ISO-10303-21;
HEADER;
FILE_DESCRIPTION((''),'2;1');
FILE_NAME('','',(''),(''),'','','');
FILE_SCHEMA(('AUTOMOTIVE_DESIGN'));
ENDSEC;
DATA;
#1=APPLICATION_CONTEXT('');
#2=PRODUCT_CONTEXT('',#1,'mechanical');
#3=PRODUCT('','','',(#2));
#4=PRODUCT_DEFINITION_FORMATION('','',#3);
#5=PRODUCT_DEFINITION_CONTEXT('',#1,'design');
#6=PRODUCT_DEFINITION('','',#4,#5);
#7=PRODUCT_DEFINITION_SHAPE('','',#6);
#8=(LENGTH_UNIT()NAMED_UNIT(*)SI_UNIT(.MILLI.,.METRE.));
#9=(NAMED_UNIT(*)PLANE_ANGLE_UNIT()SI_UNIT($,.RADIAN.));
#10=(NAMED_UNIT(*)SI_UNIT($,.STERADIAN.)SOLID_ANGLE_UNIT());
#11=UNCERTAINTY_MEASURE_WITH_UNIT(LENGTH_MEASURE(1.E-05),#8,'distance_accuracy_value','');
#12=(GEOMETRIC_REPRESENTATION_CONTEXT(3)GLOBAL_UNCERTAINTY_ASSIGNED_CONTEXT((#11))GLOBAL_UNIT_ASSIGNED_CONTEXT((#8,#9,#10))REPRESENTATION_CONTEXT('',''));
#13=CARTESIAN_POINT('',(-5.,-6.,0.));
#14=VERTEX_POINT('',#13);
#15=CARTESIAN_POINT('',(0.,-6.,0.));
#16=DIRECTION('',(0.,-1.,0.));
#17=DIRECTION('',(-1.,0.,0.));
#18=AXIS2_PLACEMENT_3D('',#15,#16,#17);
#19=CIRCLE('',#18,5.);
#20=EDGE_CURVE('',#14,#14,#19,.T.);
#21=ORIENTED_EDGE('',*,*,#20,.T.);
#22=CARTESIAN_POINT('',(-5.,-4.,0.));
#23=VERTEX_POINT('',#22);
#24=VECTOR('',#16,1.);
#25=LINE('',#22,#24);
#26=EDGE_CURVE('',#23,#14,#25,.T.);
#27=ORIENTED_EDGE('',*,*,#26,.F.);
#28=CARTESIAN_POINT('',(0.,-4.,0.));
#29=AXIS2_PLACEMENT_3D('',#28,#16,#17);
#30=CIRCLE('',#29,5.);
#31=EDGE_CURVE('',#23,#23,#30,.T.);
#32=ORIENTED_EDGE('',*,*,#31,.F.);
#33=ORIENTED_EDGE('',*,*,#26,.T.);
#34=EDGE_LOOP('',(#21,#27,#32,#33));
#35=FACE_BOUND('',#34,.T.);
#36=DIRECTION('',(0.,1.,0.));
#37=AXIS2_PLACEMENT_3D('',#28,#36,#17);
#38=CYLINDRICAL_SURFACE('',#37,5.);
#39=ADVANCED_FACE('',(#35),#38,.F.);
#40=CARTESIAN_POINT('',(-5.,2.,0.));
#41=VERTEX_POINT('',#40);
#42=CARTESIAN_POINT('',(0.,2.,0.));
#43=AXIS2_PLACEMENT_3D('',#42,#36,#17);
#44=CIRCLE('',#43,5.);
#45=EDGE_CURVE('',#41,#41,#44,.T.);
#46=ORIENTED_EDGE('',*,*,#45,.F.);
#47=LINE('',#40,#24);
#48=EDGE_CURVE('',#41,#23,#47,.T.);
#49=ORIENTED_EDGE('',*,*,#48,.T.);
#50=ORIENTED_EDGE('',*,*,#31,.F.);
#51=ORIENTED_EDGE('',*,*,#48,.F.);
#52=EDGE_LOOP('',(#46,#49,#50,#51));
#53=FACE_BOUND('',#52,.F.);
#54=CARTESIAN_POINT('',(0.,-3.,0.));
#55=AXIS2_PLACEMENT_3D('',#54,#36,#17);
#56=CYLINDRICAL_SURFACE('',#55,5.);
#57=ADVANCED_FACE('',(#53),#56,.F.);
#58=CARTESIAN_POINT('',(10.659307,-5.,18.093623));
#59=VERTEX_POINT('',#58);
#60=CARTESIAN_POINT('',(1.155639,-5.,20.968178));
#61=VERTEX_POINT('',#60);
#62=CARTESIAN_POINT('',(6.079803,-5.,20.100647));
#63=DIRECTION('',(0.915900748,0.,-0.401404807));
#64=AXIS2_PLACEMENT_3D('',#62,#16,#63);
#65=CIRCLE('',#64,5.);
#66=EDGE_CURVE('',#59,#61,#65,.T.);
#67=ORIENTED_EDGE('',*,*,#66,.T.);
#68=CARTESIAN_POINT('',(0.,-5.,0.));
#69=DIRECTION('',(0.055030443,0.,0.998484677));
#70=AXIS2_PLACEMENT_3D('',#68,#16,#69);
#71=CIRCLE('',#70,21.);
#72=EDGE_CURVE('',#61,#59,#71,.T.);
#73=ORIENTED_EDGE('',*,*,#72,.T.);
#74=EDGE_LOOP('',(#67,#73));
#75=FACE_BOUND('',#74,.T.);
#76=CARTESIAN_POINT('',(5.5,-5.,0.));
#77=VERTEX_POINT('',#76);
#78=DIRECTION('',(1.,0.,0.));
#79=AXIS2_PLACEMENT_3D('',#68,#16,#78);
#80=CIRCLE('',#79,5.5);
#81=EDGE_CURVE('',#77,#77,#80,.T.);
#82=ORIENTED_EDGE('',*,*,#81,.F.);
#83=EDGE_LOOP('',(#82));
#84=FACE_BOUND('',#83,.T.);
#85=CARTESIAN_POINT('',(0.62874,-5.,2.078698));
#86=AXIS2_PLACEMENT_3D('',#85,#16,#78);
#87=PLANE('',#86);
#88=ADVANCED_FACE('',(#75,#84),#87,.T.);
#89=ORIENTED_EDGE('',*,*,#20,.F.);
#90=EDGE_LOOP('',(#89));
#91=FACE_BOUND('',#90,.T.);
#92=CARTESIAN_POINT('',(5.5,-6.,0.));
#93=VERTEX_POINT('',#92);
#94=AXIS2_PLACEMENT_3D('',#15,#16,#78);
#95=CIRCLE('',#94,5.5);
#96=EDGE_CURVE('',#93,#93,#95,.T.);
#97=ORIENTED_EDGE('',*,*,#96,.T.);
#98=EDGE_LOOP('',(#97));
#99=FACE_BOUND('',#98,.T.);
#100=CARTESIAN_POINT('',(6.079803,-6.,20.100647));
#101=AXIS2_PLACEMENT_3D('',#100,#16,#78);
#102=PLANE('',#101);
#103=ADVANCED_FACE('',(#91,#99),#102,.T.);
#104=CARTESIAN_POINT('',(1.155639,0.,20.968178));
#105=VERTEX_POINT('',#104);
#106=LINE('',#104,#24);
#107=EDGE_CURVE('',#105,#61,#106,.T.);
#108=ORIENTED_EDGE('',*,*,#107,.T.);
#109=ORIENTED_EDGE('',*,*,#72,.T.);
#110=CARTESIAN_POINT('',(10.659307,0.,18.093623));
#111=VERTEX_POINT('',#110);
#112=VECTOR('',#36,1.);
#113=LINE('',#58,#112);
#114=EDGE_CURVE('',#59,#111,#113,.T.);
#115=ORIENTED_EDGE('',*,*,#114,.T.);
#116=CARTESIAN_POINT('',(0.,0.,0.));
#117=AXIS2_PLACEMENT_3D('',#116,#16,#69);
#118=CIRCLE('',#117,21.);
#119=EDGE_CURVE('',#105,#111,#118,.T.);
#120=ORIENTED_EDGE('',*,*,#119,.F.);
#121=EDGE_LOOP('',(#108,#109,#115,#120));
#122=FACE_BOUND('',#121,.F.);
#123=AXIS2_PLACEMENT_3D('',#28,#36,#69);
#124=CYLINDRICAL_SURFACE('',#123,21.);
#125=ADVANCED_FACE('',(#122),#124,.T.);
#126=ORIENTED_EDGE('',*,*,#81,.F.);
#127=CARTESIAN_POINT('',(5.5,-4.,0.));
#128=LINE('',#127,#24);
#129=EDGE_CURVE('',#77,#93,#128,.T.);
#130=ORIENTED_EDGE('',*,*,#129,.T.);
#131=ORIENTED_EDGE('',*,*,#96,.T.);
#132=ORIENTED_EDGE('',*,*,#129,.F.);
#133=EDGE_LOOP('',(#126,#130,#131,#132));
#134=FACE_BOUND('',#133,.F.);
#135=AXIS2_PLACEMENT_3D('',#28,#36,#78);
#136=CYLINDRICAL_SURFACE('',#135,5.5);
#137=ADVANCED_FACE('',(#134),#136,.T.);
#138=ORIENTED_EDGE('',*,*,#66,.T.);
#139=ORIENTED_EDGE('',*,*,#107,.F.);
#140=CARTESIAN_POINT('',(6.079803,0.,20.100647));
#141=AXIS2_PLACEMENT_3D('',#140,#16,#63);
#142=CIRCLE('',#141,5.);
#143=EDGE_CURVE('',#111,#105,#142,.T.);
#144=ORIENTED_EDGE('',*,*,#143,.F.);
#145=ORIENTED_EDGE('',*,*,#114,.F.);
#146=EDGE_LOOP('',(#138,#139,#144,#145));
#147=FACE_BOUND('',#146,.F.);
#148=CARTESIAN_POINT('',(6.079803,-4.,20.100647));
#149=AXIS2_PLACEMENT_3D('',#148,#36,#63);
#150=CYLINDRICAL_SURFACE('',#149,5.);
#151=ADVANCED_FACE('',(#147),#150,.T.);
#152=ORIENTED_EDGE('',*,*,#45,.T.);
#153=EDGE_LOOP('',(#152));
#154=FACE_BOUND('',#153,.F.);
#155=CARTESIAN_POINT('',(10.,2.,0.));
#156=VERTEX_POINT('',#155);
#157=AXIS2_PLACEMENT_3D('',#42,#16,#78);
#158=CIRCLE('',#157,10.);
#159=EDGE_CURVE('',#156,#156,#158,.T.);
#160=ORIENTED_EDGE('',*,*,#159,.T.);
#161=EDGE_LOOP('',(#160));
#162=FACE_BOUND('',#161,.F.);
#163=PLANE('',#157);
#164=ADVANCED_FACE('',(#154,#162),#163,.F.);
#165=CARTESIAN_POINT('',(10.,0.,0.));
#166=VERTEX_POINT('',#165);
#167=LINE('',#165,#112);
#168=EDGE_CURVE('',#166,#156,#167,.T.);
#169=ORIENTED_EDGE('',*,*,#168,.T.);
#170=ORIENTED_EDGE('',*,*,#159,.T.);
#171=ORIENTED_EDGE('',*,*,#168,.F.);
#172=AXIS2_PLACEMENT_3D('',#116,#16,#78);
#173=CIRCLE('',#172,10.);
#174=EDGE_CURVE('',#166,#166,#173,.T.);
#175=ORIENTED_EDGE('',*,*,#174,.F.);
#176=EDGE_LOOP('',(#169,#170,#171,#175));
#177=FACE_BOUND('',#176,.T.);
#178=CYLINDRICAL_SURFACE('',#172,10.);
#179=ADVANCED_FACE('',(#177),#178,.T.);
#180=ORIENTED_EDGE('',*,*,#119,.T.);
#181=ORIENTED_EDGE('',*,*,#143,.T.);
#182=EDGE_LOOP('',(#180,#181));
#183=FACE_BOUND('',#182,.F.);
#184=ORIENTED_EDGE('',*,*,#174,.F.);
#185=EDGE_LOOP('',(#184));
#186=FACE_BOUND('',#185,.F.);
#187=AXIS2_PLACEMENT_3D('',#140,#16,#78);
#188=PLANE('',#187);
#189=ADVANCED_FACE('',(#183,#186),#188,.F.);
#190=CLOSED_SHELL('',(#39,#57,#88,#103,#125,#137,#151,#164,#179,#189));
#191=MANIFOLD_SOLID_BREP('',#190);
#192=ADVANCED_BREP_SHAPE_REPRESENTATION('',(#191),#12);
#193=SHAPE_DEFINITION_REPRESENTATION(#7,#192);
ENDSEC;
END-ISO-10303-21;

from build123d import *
from build123d import SkipClean  # not in build123d's __all__

# Parameters (mm, degrees)
F2_R      = 21
F3_DEPTH  = 3
F4_R      = 10
F5_DEPTH  = 2
F6_R      = 5
F7_DEPTH  = 25
F8_R      = 5
F9_DEPTH  = 3
F10_R     = 5.5
F11_DEPTH = 1
F12_DEPTH = 1
F13_R     = 5.5
F14_DEPTH = 1
F15_R     = 5
F16_DEPTH = 1
F17_DEPTH = 2


# Not quite as in the source:
# - the program builds the solid bodies; features that only make, move or delete a surface that nothing else refers to are left out


with BuildPart() as f3:
    # F2 (on Front) → F3 (new body)
    with BuildSketch(Plane.XZ):
        Circle(F2_R)
    extrude(amount=F3_DEPTH)

    # F4 (on Front) → F5 (join)
    with BuildSketch(Plane.XZ):
        Circle(F4_R)
    extrude(amount=-F5_DEPTH)

    # F6 (on face) → F7 (cut)
    with BuildSketch(Plane(origin=(0, 2, 0), x_dir=(-1, 0, 0), z_dir=(0, 1, 0))):
        Circle(F6_R)
    extrude(amount=-F7_DEPTH, mode=Mode.SUBTRACT)

    # F8 (on face) → F9 (join)
    with BuildSketch(Plane.XZ.offset(3)):
        with Locations((6.0798030726, 20.1006466214)):
            Circle(F8_R)
        with BuildLine():
            ThreePointArc((10.6593068139, 18.093622585), (6.0798030726, 20.1006466214), (1.1556392931, 20.968178219))
            ThreePointArc((1.1556392931, 20.968178219), (4.6322309124, 15.3147783782), (10.6593068139, 18.093622585))
        make_face()
    extrude(amount=-F9_DEPTH)

    # F10 (on face) → F11 (join)
    with BuildSketch(Plane.XZ.offset(3)):
        with BuildLine():
            ThreePointArc((10.6593068139, 18.093622585), (7.5273752327, 24.8865148646), (1.1556392931, 20.968178219))
            ThreePointArc((1.1556392931, 20.968178219), (-6.0798030726, -20.1006466214), (10.6593068139, 18.093622585))
        make_face()
        Circle(F10_R, mode=Mode.SUBTRACT)
    with SkipClean():  # cleaning this boolean's faces spoils the solid; the shape is the same uncleaned
        extrude(amount=F11_DEPTH)

    # F12 (add): a face of the model
    f12_faces = [f3.faces().sort_by_distance(p)[0] for p in [
        (-5.3444365081, -3, 0),
    ]]
    with SkipClean():  # cleaning this boolean's faces spoils the solid; the shape is the same uncleaned
        extrude(f12_faces, amount=F12_DEPTH)

    # F13 (on face) → F14 (join)
    with BuildSketch(Plane.XZ.offset(4)):
        with BuildLine():
            ThreePointArc((10.6593068139, 18.093622585), (7.5273752327, 24.8865148646), (1.1556392931, 20.968178219))
            ThreePointArc((1.1556392931, 20.968178219), (-6.0798030726, -20.1006466214), (10.6593068139, 18.093622585))
        make_face()
        Circle(F13_R, mode=Mode.SUBTRACT)
    extrude(amount=F14_DEPTH)

    # F15 (on face) → F16 (cut)
    with BuildSketch(Plane.XZ.offset(5)):
        Circle(F15_R)
    extrude(amount=-F16_DEPTH, mode=Mode.SUBTRACT)

    # F17 (add): a face of the model
    f17_faces = [f3.faces().sort_by_distance(p)[0] for p in [
        (-5.3444365081, -4, 0),
    ]]
    extrude(f17_faces, amount=F17_DEPTH)


solid = f3.part
